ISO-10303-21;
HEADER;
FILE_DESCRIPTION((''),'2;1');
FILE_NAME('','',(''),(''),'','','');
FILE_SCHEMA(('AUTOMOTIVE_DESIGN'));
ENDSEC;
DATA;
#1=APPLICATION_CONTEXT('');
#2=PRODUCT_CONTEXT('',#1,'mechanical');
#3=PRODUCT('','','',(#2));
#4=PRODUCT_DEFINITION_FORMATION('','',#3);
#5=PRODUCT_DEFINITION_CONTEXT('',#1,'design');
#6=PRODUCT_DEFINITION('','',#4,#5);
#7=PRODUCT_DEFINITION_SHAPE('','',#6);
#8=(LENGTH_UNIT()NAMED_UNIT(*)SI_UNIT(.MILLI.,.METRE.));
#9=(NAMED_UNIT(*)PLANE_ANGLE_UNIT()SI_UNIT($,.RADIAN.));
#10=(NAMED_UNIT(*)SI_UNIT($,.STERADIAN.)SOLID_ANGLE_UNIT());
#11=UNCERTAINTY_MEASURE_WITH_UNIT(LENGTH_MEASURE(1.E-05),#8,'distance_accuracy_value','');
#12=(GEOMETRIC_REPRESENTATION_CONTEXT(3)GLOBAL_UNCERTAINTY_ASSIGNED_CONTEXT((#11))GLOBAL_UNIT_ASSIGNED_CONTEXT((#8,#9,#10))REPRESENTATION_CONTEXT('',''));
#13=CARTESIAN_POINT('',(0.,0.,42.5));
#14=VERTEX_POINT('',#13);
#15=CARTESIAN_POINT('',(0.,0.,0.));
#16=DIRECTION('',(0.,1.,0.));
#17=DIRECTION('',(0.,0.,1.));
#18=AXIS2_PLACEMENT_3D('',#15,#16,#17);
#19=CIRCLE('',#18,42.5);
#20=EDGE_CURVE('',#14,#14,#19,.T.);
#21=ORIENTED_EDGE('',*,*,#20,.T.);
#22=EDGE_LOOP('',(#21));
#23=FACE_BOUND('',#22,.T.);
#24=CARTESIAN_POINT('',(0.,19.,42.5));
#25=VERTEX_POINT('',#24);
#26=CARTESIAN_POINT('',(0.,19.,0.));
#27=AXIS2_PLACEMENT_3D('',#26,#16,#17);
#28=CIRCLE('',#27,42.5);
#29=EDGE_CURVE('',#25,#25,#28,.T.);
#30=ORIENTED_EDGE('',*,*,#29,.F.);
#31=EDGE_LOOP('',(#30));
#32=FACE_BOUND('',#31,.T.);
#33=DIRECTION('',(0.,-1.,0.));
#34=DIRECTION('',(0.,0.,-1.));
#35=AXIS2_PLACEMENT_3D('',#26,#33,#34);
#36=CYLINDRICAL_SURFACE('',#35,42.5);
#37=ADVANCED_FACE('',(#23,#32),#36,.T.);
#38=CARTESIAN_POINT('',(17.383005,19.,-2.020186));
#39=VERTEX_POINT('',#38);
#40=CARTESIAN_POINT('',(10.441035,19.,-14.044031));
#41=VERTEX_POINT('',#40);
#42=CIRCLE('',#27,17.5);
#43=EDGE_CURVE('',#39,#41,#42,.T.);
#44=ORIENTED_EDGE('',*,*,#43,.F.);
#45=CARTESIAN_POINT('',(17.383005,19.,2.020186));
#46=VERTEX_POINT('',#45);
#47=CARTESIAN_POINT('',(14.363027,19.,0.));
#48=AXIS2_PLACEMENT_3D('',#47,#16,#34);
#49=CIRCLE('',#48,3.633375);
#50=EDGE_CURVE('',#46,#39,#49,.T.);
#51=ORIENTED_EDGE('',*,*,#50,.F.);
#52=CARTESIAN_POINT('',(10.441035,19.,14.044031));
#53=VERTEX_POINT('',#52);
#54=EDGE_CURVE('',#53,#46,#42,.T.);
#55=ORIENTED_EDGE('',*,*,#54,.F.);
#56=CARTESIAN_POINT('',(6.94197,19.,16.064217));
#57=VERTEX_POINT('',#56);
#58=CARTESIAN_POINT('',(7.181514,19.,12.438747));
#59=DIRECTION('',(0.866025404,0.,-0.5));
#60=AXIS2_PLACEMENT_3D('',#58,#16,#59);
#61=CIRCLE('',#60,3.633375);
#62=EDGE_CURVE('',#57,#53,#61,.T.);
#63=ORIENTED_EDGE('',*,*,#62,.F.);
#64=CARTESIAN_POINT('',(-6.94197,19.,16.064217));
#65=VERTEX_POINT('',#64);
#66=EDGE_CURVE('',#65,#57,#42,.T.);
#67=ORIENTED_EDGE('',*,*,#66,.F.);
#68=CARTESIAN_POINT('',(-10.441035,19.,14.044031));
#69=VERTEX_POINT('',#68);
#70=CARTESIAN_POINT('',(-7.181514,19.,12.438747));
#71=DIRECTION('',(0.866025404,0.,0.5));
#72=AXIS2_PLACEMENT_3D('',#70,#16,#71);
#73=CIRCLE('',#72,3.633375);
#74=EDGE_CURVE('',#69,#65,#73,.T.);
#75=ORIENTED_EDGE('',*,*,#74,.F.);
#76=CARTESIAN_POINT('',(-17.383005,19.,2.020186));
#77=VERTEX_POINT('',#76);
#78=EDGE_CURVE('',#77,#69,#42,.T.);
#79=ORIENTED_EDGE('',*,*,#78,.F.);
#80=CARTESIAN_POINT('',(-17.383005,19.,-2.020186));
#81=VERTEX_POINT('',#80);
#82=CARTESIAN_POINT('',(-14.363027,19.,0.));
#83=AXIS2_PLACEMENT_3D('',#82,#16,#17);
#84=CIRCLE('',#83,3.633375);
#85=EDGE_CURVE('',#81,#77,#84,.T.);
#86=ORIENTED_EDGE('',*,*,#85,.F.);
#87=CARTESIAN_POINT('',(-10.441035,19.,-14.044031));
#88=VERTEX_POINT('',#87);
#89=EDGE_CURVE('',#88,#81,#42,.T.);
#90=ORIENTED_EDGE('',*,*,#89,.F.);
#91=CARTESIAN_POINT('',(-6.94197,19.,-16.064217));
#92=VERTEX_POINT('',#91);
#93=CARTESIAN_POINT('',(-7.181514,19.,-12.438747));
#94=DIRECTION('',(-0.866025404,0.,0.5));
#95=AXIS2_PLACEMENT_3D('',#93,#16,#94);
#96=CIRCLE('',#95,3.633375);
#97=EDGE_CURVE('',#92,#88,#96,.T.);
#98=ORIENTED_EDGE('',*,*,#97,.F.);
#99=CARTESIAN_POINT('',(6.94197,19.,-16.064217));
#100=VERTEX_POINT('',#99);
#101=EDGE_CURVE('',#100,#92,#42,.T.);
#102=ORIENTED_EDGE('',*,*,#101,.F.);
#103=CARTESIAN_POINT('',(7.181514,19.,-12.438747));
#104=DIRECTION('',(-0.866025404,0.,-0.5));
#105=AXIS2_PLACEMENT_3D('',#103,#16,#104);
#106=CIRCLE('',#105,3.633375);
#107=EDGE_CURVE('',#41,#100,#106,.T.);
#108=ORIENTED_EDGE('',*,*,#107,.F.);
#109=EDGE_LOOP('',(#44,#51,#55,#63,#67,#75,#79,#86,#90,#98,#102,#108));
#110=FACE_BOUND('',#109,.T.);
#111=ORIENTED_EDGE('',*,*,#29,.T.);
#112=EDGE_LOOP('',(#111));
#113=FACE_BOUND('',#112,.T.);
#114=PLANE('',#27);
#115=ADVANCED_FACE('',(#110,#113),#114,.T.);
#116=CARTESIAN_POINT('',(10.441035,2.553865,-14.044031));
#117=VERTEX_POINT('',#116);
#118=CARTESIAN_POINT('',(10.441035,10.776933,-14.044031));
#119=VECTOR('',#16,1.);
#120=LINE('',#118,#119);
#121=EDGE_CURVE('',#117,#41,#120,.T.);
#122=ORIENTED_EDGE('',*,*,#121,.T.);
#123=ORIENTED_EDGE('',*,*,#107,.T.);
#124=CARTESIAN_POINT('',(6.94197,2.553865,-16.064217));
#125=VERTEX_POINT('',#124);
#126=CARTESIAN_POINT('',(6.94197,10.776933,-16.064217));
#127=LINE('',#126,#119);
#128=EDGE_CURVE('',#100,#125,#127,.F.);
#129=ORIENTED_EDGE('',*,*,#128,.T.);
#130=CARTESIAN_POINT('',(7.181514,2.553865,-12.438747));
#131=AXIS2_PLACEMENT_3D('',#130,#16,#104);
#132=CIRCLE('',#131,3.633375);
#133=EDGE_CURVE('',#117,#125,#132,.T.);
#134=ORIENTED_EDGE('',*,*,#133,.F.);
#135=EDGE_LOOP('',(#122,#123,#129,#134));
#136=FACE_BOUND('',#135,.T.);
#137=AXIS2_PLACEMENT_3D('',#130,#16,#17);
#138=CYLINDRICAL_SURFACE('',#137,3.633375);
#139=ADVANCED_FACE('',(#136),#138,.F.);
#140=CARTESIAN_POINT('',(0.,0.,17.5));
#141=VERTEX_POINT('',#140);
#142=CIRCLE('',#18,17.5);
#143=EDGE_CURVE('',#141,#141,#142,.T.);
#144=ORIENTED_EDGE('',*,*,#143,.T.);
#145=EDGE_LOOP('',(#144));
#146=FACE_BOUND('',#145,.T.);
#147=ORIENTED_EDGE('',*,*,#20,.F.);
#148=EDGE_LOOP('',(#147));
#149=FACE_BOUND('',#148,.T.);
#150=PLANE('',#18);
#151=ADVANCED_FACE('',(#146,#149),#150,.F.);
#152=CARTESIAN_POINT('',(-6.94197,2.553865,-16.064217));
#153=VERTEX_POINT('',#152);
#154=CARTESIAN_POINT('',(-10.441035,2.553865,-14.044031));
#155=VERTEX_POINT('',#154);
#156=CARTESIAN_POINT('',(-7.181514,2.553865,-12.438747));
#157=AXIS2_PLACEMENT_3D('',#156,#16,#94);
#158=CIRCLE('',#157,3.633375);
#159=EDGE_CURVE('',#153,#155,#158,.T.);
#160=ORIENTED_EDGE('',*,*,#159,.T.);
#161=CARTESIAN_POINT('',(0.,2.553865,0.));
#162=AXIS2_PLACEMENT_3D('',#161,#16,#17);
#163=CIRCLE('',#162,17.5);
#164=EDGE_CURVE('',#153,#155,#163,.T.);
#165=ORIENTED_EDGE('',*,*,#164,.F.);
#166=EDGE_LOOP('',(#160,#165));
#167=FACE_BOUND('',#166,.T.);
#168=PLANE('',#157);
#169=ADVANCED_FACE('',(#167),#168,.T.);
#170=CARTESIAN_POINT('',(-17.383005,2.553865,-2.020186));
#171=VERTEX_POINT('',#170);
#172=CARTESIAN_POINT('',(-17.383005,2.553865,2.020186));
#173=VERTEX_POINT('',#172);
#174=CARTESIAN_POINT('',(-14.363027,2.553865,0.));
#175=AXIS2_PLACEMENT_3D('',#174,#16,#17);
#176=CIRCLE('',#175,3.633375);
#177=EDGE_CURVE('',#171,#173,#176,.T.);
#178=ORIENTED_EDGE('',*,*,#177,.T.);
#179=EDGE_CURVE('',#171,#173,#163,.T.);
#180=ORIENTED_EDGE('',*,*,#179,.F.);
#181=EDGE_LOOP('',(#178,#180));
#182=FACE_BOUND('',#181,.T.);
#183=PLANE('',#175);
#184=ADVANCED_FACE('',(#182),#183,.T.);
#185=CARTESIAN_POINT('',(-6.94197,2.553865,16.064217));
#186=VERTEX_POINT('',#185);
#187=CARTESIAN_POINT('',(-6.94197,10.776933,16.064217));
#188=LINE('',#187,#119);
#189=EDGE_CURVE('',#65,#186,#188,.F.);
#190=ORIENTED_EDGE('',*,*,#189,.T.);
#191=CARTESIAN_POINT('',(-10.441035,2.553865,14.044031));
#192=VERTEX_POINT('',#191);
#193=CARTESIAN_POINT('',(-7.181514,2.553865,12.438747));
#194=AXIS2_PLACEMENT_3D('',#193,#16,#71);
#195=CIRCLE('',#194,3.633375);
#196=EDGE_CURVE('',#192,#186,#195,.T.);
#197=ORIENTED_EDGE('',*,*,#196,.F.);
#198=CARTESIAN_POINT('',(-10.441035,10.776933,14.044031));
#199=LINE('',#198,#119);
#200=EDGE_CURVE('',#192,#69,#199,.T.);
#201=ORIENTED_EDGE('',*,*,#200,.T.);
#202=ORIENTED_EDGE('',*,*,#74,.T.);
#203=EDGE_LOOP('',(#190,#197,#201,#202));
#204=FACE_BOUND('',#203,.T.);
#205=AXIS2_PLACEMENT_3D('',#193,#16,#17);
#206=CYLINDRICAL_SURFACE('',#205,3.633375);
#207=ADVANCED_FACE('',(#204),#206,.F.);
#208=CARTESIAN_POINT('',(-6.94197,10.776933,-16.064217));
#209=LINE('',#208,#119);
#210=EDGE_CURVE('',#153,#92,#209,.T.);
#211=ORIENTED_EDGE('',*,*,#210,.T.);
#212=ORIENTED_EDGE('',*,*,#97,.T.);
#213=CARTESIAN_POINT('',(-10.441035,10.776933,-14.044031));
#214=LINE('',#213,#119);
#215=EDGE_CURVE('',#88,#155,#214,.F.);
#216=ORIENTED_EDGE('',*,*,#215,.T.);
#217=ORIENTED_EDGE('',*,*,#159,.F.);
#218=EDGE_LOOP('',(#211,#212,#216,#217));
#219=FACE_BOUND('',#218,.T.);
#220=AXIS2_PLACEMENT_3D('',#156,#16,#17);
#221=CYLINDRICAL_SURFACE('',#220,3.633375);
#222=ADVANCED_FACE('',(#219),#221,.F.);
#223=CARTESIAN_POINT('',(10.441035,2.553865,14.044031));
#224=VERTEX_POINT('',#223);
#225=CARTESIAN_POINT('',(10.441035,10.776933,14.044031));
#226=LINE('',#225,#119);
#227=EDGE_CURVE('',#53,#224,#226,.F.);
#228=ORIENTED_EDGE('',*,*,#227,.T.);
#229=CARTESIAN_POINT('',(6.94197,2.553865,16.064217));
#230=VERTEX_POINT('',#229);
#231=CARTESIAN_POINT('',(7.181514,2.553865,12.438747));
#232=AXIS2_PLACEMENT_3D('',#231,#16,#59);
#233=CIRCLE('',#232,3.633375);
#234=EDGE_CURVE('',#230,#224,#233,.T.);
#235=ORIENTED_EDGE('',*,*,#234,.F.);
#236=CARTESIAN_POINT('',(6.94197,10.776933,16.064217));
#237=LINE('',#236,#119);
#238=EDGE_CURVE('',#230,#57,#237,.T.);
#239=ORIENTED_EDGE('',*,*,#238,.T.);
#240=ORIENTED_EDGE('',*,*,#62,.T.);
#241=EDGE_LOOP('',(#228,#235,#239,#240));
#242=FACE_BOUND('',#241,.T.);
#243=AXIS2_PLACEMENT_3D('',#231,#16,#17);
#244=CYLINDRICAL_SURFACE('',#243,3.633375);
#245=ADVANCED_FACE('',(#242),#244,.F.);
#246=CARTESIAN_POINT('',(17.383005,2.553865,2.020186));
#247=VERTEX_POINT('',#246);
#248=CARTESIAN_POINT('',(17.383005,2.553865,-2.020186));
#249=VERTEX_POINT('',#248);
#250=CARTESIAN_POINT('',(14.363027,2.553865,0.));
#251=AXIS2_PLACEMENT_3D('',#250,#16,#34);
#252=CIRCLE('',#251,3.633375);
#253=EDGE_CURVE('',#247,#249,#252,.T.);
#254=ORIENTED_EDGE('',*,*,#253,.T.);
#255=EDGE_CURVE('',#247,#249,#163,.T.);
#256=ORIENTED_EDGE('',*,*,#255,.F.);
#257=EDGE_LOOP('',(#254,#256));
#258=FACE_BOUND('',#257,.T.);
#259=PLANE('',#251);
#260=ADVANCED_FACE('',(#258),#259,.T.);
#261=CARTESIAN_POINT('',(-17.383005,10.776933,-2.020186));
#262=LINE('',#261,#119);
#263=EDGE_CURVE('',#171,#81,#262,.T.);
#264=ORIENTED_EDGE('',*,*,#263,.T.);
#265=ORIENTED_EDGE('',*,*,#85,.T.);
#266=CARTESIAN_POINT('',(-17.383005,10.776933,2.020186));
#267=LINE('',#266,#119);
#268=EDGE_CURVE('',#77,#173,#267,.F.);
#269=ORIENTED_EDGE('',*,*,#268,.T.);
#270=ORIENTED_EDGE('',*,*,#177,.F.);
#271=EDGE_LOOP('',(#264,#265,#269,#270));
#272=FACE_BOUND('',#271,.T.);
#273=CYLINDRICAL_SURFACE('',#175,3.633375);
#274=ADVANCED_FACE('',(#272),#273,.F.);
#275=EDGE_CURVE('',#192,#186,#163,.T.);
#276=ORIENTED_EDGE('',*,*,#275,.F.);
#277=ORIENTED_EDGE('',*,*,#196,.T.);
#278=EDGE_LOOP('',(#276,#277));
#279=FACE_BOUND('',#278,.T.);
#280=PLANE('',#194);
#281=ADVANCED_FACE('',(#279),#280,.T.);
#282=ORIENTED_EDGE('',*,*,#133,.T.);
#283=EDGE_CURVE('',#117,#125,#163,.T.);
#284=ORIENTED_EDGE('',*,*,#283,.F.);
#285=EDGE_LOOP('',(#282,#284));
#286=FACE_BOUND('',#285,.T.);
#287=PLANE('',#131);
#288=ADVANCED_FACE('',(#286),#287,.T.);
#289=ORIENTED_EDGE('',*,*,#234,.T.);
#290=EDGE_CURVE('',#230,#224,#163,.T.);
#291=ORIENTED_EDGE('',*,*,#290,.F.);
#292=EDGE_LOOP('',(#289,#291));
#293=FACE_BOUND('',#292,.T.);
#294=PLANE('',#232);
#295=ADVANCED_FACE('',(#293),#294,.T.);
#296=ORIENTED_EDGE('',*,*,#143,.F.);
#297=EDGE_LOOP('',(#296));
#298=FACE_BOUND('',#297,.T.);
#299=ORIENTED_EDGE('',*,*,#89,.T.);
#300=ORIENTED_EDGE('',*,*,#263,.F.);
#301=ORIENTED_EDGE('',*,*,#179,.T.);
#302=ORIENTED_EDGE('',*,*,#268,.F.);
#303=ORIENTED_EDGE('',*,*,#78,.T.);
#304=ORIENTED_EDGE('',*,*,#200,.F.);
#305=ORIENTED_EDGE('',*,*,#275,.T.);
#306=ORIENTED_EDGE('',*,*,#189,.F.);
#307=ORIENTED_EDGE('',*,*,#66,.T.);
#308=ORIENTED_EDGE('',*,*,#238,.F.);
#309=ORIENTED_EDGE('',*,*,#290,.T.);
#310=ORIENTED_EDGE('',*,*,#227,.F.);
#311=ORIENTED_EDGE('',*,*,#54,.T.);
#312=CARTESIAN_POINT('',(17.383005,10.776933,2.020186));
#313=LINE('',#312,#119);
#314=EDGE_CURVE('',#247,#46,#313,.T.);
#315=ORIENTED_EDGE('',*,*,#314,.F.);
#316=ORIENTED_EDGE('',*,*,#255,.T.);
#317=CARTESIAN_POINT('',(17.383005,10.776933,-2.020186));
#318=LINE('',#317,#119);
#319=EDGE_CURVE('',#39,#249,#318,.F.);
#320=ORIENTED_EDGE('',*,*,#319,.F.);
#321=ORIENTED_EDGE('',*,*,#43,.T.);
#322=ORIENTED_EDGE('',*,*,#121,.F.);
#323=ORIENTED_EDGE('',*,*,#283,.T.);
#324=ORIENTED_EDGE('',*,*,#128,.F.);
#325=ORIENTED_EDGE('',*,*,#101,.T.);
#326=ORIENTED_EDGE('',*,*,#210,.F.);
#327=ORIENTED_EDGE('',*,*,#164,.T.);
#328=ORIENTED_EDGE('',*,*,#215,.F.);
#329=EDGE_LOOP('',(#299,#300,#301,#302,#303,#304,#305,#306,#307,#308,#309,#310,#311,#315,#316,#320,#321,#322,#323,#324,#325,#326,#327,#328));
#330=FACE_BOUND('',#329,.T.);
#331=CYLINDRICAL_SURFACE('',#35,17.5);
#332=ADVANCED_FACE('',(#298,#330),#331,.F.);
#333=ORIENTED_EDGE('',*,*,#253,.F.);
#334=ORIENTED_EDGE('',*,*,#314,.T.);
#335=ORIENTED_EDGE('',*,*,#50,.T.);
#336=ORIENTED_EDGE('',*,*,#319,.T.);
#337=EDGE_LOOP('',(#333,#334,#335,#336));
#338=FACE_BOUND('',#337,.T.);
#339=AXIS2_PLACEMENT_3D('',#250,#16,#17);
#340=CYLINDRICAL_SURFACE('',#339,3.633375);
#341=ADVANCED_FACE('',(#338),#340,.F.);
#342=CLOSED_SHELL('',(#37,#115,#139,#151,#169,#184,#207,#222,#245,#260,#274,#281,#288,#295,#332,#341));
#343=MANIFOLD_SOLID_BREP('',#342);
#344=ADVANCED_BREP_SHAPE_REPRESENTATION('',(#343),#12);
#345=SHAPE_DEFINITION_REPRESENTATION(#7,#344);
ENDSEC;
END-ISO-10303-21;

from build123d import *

# Parameters (mm, degrees)
SKETCH1_R           = 42.5
BOSS_EXTRUDE1_DEPTH = 19
SKETCH2_R           = 17.5
CUT_EXTRUDE1_DEPTH  = 64.035704168
SKETCH3_R           = 3.633374968
CUT_EXTRUDE2_DEPTH  = 16.446134519
CIRPATTERN1_COUNT   = 6


with BuildPart() as part:
    # Sketch1 → Boss-Extrude1 (new body)
    with BuildSketch(Plane(origin=(0, 0, 0), x_dir=(1, 0, 0), z_dir=(0, 1, 0))):
        Circle(SKETCH1_R)
    extrude(amount=BOSS_EXTRUDE1_DEPTH)

    # Sketch2 → Cut-Extrude1 (cut, through all)
    with BuildSketch(Plane(origin=(0, 0, 0), x_dir=(1, 0, 0), z_dir=(0, 1, 0))):
        Circle(SKETCH2_R)
    extrude(amount=CUT_EXTRUDE1_DEPTH, mode=Mode.SUBTRACT)

    # Sketch3 → Cut-Extrude2 (cut)
    with BuildSketch(Plane(origin=(0, 19, 0), x_dir=(1, 0, 0), z_dir=(0, 1, 0))):
        with Locations((-14.363027448, 0)):
            Circle(SKETCH3_R)
    cut_extrude2 = extrude(amount=-CUT_EXTRUDE2_DEPTH, mode=Mode.SUBTRACT)

    # CirPattern1: Cut-Extrude2 ×6 about axis
    cirpattern1_axis = Axis((0, 0, 0), (0, 1, 0))
    for i in range(1, CIRPATTERN1_COUNT):
        add(cut_extrude2.rotate(cirpattern1_axis, i * 360 / CIRPATTERN1_COUNT), mode=Mode.SUBTRACT)


solid = part.part
